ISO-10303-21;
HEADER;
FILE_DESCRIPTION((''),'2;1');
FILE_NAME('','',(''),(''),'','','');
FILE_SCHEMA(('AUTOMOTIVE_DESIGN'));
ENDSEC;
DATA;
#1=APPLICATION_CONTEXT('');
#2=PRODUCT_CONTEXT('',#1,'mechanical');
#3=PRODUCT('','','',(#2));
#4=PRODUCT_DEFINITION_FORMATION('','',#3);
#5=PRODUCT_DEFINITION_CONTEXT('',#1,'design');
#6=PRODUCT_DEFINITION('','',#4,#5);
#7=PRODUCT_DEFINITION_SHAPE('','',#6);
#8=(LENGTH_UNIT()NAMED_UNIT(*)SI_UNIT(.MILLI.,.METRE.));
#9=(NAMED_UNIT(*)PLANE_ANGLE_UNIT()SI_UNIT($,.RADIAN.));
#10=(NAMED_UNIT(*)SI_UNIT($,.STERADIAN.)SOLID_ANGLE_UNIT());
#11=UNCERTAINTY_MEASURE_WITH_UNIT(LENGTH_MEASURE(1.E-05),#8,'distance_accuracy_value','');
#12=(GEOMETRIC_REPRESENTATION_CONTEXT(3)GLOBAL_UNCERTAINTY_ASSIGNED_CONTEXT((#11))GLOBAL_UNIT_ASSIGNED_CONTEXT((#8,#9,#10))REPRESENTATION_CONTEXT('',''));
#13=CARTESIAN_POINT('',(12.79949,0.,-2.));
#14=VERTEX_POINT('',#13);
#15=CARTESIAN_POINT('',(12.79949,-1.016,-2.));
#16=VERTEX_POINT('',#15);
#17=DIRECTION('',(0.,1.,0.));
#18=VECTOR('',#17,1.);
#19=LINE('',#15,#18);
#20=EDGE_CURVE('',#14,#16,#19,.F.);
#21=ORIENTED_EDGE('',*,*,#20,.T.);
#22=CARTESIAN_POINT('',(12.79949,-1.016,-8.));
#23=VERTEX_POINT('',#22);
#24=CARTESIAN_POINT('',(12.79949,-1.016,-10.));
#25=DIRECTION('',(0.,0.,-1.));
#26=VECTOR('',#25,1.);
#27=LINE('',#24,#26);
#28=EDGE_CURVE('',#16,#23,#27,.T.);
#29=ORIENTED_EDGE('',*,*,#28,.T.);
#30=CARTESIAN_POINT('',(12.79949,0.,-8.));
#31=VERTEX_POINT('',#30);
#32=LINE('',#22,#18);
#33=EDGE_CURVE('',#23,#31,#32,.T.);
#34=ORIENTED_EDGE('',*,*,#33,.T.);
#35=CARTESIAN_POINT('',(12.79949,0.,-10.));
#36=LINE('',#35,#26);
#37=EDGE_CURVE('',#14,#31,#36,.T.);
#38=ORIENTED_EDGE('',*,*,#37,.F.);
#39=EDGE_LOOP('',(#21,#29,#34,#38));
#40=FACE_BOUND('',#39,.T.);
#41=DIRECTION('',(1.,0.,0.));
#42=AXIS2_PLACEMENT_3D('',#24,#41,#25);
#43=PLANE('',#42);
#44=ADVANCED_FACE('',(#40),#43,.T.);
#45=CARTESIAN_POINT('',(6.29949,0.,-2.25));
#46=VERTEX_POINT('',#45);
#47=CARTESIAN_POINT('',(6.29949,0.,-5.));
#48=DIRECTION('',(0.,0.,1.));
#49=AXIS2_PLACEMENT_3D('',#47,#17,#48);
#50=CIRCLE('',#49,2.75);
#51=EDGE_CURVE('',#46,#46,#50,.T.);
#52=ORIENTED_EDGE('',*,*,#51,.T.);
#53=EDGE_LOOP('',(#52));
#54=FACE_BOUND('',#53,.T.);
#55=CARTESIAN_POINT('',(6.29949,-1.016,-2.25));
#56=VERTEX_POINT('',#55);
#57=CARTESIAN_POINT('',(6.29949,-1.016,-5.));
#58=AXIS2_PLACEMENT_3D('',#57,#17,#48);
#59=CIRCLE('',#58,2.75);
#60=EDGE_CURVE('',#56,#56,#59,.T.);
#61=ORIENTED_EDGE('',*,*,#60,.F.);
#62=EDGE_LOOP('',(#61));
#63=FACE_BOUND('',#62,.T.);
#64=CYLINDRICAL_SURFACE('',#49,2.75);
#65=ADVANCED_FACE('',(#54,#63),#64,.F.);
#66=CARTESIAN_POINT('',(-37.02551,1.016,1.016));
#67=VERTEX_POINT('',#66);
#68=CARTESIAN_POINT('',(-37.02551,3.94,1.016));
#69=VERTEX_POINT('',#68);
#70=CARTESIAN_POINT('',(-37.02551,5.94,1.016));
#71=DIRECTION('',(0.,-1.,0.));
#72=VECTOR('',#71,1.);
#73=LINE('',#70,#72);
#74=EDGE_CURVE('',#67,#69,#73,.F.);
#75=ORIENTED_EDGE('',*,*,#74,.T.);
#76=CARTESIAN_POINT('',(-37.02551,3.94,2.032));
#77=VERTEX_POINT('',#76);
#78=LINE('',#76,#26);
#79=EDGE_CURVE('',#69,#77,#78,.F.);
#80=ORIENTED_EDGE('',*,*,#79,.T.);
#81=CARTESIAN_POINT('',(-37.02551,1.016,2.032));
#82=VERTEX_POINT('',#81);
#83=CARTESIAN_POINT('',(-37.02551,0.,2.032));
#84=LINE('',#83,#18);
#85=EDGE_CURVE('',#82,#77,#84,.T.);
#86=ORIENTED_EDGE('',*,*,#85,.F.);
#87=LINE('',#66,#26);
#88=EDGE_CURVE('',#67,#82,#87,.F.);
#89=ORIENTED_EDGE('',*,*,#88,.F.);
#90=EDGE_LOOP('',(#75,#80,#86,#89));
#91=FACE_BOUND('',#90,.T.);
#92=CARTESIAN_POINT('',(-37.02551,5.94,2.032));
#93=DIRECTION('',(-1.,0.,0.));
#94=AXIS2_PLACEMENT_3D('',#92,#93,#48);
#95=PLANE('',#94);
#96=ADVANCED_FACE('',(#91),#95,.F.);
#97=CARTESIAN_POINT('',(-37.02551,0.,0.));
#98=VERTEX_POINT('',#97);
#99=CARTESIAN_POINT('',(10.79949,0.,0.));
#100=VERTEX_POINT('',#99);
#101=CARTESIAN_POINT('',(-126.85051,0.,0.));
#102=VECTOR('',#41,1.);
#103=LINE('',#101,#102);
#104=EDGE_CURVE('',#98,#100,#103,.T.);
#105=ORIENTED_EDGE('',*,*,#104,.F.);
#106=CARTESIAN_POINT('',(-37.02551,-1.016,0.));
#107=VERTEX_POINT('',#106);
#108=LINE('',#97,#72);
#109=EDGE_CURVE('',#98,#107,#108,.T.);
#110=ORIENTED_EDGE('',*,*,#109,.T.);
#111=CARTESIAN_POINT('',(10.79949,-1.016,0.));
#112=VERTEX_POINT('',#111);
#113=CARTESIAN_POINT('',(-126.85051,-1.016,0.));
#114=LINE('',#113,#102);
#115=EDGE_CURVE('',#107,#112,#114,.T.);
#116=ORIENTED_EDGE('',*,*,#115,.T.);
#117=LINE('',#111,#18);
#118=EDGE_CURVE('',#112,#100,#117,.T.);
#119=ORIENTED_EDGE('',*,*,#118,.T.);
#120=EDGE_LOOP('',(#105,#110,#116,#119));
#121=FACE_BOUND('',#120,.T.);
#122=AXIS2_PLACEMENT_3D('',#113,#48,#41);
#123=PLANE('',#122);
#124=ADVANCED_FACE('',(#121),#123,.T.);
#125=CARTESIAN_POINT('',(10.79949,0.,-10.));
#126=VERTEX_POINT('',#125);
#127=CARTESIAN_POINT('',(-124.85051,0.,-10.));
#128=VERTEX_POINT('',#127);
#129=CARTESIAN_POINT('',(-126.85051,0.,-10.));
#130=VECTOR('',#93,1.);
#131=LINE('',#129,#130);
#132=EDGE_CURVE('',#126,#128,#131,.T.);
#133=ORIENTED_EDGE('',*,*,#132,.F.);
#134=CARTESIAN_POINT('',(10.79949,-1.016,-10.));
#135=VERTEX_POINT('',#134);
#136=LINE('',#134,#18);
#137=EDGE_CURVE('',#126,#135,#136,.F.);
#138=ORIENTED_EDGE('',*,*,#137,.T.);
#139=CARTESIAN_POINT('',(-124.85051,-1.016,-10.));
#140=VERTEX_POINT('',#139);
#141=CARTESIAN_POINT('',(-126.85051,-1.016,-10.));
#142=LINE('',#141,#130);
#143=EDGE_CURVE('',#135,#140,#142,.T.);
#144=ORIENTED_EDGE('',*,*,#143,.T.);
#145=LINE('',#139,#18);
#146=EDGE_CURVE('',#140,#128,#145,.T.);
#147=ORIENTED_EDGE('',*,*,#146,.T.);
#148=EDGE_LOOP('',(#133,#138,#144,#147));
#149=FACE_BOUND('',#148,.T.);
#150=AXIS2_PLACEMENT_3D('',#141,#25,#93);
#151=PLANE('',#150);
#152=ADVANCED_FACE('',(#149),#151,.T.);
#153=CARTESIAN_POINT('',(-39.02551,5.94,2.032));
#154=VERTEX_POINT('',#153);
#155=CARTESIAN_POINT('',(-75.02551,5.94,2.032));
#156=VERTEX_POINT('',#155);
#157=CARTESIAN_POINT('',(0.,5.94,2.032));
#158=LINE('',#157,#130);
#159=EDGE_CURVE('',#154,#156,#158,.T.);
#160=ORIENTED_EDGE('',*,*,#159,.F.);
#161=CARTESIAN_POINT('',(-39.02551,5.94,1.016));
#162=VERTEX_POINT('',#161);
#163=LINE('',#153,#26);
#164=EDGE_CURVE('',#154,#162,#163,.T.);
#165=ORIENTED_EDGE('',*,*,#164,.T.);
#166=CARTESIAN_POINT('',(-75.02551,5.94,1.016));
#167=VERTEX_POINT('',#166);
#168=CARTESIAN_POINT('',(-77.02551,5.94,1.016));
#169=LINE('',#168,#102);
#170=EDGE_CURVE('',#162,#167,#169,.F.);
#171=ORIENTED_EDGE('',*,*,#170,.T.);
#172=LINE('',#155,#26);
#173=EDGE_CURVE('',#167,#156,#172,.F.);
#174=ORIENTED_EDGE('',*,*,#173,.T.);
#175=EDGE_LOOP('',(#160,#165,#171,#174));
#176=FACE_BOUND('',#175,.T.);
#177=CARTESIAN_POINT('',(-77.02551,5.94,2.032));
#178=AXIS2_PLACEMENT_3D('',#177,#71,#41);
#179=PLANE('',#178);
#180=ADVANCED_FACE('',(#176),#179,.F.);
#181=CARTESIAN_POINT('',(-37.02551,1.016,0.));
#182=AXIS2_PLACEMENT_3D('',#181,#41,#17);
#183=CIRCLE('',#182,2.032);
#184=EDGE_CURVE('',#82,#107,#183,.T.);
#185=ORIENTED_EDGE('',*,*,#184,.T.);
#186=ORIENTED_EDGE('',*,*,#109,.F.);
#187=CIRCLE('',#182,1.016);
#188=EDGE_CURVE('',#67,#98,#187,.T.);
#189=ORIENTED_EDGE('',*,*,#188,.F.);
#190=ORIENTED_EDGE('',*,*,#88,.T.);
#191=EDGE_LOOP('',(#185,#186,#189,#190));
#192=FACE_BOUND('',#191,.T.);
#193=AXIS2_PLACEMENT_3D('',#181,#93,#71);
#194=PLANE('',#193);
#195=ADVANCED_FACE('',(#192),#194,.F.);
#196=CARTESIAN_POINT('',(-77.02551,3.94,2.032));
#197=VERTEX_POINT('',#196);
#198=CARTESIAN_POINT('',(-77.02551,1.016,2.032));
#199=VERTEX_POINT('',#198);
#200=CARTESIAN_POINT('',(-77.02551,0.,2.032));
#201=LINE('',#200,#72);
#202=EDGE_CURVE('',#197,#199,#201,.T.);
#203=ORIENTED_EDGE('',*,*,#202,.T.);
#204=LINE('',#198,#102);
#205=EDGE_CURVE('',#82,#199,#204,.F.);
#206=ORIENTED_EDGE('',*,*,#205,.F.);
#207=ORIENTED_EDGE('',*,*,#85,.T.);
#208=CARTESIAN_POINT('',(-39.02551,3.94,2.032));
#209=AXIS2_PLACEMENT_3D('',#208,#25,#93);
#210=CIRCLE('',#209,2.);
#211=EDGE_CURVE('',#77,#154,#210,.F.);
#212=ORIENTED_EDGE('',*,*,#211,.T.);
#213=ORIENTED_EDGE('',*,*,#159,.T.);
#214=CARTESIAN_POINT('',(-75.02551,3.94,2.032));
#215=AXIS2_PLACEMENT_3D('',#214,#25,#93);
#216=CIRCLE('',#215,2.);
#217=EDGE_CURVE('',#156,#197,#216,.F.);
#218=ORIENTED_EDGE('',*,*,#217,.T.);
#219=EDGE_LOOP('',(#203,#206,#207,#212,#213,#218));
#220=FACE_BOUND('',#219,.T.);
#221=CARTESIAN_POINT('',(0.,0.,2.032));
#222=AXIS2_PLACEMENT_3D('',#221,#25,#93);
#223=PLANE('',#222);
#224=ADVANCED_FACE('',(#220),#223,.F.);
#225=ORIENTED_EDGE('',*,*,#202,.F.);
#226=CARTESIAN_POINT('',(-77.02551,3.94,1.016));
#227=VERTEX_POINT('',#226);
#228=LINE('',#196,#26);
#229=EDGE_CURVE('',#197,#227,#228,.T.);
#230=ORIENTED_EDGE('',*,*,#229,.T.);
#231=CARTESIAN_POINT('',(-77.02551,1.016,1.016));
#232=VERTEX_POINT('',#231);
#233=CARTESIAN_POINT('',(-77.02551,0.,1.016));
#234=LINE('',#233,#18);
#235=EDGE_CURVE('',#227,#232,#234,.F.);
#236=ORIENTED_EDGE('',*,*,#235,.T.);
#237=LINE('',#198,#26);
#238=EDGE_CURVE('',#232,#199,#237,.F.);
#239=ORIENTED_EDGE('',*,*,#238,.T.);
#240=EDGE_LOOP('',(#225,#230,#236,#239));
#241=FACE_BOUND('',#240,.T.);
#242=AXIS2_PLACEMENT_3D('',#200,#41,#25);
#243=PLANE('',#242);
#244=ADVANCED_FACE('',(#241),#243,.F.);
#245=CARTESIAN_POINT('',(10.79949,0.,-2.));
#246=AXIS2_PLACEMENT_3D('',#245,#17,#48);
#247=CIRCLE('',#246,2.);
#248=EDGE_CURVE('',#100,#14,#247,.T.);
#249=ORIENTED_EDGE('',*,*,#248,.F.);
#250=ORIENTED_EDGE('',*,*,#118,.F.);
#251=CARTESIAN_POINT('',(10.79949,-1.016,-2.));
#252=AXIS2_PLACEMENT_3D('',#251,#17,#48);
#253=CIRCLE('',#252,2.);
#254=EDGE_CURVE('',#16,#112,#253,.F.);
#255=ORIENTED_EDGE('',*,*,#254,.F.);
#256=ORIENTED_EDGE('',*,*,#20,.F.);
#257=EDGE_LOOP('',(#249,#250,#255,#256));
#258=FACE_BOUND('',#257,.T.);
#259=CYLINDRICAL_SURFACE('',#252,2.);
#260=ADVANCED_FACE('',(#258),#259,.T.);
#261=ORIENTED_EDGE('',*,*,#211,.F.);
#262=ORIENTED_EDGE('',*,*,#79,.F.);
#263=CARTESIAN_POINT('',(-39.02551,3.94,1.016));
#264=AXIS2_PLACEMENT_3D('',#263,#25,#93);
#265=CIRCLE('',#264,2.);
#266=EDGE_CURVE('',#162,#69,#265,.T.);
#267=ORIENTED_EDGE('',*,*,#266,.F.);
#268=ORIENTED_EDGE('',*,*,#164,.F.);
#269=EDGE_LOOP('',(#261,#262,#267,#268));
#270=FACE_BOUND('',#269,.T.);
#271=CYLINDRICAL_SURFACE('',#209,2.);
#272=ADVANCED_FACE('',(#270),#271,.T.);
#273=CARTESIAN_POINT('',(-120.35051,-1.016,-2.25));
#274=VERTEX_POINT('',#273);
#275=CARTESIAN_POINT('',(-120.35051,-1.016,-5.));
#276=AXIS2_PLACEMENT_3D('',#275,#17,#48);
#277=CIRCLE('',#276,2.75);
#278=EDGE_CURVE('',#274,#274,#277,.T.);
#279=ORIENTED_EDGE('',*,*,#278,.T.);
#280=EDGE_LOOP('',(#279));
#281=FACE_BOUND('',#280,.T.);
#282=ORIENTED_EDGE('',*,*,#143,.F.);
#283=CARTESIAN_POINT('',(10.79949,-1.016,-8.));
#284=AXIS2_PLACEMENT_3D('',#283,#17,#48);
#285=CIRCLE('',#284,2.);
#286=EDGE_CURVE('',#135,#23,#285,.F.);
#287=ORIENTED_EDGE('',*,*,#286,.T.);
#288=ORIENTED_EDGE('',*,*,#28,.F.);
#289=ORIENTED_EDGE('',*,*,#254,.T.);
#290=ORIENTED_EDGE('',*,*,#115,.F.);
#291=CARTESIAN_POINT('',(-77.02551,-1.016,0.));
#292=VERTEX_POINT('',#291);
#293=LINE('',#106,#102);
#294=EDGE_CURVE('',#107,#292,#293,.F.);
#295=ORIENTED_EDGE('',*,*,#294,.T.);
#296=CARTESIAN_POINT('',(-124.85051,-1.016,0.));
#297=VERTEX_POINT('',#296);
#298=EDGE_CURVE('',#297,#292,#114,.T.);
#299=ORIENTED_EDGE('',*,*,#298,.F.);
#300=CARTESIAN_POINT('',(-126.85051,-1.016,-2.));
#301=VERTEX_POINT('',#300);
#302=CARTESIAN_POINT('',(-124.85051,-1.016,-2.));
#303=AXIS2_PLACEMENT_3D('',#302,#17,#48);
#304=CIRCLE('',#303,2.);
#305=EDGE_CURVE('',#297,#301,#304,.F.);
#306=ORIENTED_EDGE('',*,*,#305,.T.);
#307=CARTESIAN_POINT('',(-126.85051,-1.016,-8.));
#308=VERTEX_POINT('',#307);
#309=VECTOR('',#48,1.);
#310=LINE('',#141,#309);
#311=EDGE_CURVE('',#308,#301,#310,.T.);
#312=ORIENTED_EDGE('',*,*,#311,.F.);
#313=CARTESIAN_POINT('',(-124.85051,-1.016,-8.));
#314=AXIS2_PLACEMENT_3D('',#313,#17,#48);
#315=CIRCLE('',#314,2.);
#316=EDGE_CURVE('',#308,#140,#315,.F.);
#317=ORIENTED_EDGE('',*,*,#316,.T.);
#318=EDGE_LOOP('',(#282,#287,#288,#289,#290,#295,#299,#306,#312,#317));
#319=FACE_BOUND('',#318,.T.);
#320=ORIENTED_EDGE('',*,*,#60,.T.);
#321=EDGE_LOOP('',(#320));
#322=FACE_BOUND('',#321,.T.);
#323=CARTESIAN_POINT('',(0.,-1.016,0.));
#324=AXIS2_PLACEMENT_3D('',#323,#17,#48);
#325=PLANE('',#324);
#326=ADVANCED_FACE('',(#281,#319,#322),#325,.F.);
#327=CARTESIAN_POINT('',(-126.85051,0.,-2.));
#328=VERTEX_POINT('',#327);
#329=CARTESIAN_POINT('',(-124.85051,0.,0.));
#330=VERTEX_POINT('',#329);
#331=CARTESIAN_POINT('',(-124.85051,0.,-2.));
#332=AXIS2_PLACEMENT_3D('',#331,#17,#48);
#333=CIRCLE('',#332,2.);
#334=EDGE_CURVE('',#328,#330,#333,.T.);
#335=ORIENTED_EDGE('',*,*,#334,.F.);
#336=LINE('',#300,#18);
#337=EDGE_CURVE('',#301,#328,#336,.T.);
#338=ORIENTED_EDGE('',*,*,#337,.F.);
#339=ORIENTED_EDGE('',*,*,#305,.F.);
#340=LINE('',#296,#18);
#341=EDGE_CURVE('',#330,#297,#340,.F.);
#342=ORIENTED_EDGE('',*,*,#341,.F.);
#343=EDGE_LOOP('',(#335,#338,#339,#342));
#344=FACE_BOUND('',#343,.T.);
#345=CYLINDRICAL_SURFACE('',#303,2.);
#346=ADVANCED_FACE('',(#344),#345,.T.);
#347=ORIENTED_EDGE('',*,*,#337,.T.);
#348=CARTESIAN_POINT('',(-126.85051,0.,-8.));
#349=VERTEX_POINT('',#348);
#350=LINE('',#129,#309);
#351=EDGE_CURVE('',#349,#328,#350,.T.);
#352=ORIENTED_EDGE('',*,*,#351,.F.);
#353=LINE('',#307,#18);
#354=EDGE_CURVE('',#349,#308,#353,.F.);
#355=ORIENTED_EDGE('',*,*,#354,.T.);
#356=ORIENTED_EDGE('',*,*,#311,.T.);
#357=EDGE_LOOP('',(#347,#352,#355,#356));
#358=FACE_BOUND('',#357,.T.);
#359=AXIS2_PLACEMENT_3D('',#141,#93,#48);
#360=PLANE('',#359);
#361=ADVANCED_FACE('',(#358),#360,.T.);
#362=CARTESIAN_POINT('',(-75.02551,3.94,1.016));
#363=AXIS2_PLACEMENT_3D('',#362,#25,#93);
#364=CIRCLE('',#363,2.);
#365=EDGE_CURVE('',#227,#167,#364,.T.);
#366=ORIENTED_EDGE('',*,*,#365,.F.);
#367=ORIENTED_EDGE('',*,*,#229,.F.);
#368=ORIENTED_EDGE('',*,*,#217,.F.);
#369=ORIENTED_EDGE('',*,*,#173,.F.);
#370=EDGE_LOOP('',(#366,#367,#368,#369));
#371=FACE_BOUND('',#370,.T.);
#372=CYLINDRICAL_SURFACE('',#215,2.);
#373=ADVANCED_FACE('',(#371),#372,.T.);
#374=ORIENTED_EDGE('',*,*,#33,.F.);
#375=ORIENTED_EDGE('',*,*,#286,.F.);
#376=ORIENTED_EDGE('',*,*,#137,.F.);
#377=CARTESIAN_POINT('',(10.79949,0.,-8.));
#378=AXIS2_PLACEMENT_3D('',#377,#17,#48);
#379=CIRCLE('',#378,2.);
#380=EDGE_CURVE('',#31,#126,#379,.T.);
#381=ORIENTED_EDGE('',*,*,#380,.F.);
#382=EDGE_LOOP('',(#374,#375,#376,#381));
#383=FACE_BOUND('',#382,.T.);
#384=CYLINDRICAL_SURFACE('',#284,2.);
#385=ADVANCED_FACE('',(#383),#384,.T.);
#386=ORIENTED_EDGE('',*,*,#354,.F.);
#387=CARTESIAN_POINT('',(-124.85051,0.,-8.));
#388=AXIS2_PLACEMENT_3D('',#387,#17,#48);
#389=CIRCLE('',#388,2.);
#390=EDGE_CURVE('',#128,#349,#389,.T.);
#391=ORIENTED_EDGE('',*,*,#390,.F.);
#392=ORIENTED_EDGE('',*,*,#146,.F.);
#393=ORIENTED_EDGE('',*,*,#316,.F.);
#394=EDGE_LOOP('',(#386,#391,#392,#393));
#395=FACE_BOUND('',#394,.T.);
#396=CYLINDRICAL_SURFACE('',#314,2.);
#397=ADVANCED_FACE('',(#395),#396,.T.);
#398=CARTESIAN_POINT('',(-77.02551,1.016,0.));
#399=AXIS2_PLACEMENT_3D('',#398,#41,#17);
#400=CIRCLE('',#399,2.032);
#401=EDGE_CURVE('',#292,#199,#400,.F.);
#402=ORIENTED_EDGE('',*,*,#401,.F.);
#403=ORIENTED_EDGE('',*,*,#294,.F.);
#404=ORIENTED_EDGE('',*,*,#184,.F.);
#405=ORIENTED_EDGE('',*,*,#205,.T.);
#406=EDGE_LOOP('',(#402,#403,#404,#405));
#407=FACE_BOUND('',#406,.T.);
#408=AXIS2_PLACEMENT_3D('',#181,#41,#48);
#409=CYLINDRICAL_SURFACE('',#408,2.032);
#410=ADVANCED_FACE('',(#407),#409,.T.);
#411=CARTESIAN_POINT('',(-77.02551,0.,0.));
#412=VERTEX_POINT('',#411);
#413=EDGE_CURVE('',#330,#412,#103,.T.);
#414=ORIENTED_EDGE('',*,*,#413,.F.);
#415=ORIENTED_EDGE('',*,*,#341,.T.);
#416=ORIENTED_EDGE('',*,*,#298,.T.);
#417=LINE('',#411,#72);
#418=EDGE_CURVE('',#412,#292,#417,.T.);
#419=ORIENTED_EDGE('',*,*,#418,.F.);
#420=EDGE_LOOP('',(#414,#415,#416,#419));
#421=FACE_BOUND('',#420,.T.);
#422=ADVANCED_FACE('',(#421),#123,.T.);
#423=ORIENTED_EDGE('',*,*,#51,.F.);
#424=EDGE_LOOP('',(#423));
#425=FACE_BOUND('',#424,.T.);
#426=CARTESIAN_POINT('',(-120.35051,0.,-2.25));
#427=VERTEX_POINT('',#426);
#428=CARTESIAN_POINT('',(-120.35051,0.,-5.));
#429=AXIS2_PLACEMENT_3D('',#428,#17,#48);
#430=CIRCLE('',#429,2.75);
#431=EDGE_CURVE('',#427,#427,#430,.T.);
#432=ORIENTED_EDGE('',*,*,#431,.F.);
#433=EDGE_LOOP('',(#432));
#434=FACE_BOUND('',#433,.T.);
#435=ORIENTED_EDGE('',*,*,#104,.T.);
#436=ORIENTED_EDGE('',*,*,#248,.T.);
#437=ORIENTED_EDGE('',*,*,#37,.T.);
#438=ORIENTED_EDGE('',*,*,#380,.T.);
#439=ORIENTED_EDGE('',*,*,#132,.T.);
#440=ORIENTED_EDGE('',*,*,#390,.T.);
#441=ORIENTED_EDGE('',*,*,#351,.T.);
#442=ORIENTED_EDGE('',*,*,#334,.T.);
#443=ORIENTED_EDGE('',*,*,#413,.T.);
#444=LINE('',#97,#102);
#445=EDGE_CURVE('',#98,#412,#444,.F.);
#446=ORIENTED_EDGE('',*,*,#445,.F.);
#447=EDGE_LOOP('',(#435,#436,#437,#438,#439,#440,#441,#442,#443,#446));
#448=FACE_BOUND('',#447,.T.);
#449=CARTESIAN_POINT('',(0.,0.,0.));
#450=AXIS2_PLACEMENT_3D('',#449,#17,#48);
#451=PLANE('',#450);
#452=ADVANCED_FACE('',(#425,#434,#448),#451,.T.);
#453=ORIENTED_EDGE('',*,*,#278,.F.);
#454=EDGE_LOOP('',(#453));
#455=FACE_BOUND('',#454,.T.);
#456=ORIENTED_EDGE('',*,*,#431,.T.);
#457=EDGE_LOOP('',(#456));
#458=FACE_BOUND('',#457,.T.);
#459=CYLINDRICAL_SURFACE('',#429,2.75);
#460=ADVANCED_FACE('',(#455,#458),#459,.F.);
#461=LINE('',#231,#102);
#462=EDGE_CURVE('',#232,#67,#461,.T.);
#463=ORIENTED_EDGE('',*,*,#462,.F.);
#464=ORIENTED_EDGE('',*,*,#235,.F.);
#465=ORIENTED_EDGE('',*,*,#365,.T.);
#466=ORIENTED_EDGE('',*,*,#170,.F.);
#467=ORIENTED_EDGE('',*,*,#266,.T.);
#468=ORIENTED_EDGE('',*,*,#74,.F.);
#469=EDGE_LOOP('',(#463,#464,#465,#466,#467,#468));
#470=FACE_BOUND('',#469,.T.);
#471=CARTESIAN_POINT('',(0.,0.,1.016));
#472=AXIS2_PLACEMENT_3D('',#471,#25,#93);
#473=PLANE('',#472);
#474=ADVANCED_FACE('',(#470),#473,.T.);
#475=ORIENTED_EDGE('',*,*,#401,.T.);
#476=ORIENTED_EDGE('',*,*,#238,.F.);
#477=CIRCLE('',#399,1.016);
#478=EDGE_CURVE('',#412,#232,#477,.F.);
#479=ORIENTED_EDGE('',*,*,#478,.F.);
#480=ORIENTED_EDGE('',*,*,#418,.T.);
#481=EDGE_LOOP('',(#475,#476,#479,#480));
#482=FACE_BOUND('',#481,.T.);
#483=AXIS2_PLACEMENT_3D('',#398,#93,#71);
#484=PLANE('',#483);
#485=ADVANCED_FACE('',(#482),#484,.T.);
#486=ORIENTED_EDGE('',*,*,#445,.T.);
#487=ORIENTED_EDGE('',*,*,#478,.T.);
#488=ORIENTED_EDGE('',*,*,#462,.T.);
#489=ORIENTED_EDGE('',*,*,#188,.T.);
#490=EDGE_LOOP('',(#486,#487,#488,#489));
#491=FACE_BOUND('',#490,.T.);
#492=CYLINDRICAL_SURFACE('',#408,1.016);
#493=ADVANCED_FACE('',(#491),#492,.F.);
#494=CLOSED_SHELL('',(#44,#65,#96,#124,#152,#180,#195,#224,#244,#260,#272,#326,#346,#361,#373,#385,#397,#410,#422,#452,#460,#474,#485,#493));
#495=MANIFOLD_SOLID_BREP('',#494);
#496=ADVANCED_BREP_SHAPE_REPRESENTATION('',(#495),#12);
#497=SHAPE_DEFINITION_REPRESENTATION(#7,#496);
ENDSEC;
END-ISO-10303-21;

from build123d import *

# Parameters (mm, degrees)
SKETCH1_W            = 139.65
SKETCH1_H            = 10
BASE_FLANGE1_DEPTH   = 1.016
EDGE_FLANGE1_DEPTH   = 40
FILLET1_R            = 2
M5_CLEARANCE_HOLE1_D = 5.5


# Sheet-metal steps are written as plain solids
with BuildPart() as part:
    # Sketch1 → Base-Flange1 (new body)
    with BuildSketch(Plane(origin=(0, 0, 0), x_dir=(1, 0, 0), z_dir=(0, 1, 0))):
        with Locations((-57.025509978, 5)):
            Rectangle(SKETCH1_W, SKETCH1_H)
    extrude(amount=-BASE_FLANGE1_DEPTH)

    # Edge-Flange1 section (across the edge) → Edge-Flange1 (add)
    with BuildSketch(Plane(origin=(-77.025509978, 0, 1.016), x_dir=(0, 0, -1), z_dir=(1, 0, 0))):
        with BuildLine():
            Line((-1.016, 1.016), (-1.016, 5.94))
            Line((-1.016, 5.94), (0, 5.94))
            Line((0, 5.94), (0, 1.016))
            ThreePointArc((0, 1.016), (0.29757951, 0.29757951), (1.016, 0))
            Line((1.016, 0), (1.016, -1.016))
            ThreePointArc((1.016, -1.016), (-0.420840979, -0.420840979), (-1.016, 1.016))
        make_face()
    extrude(amount=EDGE_FLANGE1_DEPTH)

    # Fillet1
    fillet1_edges = [part.edges().sort_by_distance(p)[0] for p in [
        (-77.025509978, 5.94, 1.524),
        (-37.025509978, 5.94, 1.524),
        (-126.850509978, -0.508, -10),
        (12.799490022, -0.508, -10),
        (12.799490022, -0.508, 0),
        (-126.850509978, -0.508, 0),
    ]]
    fillet(fillet1_edges, radius=FILLET1_R)

    # M5 Clearance Hole1 (through all)
    with Locations(Plane(origin=(0, 0, 0), x_dir=(1, 0, 0), z_dir=(0, 1, 0))):
        with Locations((-120.350509978, 5), (6.299490022, 5)):
            Hole(M5_CLEARANCE_HOLE1_D / 2)


solid = part.part
